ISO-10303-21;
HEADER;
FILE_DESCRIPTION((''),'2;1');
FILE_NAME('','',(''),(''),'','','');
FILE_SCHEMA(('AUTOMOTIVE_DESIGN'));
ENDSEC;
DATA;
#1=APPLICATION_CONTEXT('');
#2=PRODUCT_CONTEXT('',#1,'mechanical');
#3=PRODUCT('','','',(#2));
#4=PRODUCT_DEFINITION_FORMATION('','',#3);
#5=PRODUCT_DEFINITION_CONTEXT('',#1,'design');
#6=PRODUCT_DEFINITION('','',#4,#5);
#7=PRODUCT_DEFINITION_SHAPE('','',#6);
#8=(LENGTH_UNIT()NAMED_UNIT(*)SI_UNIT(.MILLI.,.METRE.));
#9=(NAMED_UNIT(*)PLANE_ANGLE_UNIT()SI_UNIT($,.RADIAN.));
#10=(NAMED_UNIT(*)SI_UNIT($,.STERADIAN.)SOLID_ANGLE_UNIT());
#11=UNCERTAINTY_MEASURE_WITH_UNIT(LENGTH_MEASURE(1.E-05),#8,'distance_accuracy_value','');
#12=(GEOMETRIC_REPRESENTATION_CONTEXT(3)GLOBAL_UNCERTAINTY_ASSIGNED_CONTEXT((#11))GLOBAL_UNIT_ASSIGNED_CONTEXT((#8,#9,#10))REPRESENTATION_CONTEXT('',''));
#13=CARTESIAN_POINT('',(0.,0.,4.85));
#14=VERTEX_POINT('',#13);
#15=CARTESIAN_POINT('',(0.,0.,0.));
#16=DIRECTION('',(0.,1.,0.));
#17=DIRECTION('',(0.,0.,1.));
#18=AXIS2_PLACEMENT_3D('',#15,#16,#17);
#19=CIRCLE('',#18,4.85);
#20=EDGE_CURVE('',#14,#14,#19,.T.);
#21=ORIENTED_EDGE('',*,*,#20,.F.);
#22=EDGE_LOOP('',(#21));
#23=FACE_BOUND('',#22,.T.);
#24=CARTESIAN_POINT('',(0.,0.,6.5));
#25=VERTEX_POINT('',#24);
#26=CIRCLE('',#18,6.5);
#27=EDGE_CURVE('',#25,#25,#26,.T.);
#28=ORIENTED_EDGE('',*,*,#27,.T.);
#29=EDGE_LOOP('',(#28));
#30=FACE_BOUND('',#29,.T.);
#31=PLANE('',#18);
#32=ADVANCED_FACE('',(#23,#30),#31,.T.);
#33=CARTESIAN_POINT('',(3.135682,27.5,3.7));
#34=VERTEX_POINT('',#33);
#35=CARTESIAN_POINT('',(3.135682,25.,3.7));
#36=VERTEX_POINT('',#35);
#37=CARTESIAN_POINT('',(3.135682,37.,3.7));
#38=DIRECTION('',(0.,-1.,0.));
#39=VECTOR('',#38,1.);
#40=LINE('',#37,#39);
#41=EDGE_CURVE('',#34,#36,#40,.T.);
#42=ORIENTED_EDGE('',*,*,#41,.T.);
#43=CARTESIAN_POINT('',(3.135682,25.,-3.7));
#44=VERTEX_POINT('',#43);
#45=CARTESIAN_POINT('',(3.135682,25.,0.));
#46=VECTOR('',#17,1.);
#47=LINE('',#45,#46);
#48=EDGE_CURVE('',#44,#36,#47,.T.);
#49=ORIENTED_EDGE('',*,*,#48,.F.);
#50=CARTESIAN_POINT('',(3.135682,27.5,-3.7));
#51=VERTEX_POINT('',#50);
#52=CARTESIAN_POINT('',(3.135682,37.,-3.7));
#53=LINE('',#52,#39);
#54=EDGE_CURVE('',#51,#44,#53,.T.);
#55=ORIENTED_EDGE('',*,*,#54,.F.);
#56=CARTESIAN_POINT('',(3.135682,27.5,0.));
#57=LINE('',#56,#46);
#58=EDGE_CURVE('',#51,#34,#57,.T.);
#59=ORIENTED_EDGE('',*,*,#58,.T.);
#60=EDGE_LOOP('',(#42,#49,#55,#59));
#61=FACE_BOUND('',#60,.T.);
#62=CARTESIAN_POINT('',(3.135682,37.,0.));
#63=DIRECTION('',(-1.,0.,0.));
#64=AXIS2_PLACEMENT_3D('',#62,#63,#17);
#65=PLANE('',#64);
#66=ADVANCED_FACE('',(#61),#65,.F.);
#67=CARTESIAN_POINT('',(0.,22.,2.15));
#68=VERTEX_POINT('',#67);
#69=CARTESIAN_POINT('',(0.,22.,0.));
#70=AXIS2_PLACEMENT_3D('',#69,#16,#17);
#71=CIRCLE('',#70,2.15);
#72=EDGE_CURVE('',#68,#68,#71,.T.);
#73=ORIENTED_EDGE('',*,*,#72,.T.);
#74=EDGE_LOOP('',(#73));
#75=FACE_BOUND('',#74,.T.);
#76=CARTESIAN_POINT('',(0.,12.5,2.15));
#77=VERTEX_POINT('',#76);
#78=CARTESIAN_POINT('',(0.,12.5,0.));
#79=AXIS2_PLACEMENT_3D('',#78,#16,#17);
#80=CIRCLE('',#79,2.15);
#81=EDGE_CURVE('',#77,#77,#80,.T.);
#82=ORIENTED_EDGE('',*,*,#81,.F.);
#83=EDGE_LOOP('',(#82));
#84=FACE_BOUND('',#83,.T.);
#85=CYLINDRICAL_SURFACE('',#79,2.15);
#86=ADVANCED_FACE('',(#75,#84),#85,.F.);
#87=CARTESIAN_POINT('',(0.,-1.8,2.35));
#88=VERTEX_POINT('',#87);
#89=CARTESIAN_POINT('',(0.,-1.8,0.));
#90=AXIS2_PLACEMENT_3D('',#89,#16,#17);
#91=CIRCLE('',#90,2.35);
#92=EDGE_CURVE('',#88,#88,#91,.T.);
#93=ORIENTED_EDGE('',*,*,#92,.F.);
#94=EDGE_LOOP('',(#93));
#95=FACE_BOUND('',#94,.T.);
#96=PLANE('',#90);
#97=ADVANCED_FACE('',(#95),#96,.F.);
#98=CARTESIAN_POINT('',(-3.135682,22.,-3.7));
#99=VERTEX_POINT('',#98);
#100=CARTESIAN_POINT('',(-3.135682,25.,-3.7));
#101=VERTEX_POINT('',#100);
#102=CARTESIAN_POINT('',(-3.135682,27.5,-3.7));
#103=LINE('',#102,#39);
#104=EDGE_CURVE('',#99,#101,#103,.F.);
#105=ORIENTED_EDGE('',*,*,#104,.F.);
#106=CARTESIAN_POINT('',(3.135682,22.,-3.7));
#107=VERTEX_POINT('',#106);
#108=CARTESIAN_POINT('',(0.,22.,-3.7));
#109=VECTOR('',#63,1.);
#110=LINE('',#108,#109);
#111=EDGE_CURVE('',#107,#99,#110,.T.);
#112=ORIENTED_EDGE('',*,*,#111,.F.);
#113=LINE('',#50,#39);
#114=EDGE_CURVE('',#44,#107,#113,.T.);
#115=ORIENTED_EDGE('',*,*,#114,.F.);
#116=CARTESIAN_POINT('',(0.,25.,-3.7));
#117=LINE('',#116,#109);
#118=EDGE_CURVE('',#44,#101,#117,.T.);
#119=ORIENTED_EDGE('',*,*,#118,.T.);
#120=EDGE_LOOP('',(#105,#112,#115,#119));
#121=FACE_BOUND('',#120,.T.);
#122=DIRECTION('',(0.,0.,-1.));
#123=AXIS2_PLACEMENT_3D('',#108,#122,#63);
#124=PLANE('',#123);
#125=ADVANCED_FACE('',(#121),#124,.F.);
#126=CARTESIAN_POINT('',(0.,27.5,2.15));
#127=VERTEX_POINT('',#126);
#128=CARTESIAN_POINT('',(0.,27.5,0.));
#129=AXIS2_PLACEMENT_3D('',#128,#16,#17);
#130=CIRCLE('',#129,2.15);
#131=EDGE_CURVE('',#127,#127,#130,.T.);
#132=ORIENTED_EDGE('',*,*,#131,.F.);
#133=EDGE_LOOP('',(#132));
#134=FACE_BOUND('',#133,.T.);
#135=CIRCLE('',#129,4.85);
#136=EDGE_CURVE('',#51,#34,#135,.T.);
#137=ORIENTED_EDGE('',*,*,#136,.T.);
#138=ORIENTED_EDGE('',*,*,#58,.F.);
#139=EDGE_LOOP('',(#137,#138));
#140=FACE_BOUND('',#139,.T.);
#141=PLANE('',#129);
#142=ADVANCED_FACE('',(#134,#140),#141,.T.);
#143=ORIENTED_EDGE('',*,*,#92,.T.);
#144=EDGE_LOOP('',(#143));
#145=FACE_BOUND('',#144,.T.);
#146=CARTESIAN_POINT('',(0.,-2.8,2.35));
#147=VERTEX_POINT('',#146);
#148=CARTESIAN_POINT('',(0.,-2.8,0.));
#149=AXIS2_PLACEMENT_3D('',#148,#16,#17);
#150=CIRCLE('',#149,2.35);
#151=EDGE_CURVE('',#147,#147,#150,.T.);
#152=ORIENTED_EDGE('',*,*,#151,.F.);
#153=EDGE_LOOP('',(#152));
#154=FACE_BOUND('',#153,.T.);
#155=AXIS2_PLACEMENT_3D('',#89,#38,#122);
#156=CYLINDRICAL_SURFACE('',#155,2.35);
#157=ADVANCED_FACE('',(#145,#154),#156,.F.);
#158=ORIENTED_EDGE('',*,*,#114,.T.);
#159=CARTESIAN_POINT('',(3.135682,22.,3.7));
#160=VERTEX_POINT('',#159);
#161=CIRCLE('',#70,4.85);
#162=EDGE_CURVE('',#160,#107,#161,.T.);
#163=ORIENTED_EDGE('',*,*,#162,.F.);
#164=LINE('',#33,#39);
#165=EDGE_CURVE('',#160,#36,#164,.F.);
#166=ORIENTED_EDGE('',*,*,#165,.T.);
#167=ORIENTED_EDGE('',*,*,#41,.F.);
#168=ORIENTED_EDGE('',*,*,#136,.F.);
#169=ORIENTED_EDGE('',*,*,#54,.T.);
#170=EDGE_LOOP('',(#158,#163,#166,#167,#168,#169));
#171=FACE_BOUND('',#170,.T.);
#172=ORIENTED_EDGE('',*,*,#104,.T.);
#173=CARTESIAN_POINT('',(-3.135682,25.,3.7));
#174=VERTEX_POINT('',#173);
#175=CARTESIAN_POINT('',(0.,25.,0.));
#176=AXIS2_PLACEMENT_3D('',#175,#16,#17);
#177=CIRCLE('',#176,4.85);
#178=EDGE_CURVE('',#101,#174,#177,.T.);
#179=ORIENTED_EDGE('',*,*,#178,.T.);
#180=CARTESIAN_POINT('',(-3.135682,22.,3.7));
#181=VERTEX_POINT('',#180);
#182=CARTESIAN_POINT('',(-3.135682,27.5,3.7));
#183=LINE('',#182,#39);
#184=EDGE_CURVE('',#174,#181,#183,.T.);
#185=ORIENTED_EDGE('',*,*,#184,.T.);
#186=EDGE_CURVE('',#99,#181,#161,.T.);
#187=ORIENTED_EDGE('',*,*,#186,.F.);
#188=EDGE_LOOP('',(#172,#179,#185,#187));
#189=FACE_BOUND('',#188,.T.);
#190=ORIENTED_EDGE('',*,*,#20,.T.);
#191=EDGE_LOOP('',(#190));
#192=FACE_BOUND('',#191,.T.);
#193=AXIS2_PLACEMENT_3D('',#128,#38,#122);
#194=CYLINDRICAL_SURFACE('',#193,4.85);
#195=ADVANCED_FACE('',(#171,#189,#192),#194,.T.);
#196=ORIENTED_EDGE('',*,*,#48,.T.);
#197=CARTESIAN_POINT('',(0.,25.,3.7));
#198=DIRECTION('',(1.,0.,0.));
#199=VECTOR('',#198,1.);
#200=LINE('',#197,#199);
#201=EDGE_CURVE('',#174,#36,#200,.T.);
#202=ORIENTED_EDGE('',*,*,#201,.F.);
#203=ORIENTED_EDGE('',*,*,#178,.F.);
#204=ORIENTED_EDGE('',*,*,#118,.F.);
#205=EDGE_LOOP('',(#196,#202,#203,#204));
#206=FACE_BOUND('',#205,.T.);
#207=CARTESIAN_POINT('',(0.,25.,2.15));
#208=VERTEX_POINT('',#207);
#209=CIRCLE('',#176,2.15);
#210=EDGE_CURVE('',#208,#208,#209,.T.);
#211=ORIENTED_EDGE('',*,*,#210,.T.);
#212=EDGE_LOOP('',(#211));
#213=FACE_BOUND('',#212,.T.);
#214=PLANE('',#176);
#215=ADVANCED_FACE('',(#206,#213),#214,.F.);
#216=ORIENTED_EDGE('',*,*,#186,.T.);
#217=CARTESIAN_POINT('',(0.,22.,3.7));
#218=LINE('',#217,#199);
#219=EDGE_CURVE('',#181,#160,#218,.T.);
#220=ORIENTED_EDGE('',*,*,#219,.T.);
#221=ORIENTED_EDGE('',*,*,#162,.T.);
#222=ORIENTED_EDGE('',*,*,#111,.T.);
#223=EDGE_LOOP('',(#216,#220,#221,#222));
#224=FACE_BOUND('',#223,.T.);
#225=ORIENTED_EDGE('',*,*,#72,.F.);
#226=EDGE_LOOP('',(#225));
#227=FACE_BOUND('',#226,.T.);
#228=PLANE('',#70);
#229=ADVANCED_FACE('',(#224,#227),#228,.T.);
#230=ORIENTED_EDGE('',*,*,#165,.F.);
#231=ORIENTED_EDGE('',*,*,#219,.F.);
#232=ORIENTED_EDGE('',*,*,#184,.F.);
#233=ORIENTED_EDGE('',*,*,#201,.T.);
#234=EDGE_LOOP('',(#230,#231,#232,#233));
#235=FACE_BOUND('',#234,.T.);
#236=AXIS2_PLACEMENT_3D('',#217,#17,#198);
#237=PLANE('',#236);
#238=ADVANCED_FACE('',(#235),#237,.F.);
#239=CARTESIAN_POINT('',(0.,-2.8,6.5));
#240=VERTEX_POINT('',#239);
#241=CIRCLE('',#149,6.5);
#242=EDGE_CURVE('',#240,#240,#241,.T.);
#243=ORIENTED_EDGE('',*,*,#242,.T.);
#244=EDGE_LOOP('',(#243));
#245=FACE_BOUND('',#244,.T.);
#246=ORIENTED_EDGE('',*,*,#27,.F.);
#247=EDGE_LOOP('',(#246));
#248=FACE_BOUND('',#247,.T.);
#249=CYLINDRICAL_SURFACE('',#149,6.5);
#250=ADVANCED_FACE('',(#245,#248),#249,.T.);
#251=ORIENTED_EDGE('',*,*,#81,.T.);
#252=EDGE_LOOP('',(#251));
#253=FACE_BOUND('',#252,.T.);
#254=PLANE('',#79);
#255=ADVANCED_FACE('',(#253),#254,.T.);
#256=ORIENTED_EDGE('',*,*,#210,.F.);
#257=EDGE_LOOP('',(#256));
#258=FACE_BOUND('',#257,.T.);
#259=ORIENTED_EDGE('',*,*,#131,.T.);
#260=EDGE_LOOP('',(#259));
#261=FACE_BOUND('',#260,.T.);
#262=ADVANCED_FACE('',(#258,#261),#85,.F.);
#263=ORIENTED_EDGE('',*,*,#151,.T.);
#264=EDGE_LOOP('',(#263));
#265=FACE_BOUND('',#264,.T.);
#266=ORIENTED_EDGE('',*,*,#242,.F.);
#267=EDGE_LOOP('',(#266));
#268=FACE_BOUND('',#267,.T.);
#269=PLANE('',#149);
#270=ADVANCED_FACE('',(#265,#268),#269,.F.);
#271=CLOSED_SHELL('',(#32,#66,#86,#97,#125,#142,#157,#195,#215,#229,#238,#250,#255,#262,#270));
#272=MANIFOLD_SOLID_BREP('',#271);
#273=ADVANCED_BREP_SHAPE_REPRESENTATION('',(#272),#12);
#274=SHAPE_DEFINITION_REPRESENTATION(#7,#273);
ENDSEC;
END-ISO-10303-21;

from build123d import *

# Parameters (mm, degrees)
SKETCH1_R              = 4.85
SKETCH1_R_2            = 3
SKETCH1_R_3            = 2.15
BOSS_EXTRUDE1_DEPTH    = 27.5
BOSS_EXTRUDE2_START    = -2.8
SKETCH1_3_R            = 6.5
SKETCH1_3_R_2          = 4.85
SKETCH1_3_R_3          = 3
SKETCH1_3_R_4          = 2.15
BOSS_EXTRUDE2_DEPTH    = 2.8
CUT_EXTRUDE1_START     = 22
CUT_EXTRUDE1_OUTLINE_R = 2.15
CUT_EXTRUDE1_DEPTH     = 3
CUT_EXTRUDE2_START     = 12.5
SKETCH2_3_R            = 2.15
CUT_EXTRUDE2_DEPTH     = 15
CUT_EXTRUDE3_START     = 22
CUT_EXTRUDE3_DEPTH     = 15
CUT_EXTRUDE4_START     = -2.8
SKETCH3_R              = 2.35
CUT_EXTRUDE4_DEPTH     = 1


# Read off the part's stored shape, not the designer's step: Cut-Extrude1
with BuildPart() as part:
    # Sketch1 → Boss-Extrude1 (new body)
    # profile 1 of 3: a face of its own
    with BuildSketch(Plane(origin=(0, 0, 0), x_dir=(1, 0, 0), z_dir=(0, 1, 0))):
        with Locations(Location((0, 0, 0), (0, 0, 270))):
            Circle(SKETCH1_R)
        Circle(SKETCH1_R_2, mode=Mode.SUBTRACT)
    # profile 2 of 3: a face of its own
    with BuildSketch(Plane(origin=(0, 0, 0), x_dir=(1, 0, 0), z_dir=(0, 1, 0))):
        Circle(SKETCH1_R_2)
        Circle(SKETCH1_R_3, mode=Mode.SUBTRACT)
    # profile 3 of 3: a face of its own
    with BuildSketch(Plane(origin=(0, 0, 0), x_dir=(1, 0, 0), z_dir=(0, 1, 0))):
        Circle(SKETCH1_R_3)
    extrude(amount=BOSS_EXTRUDE1_DEPTH)

    # Sketch1<3> → Boss-Extrude2 (add)
    # profile 1 of 4: a face of its own
    with BuildSketch(Plane(origin=(0, 0, 0), x_dir=(1, 0, 0), z_dir=(0, 1, 0)).offset(BOSS_EXTRUDE2_START)):
        with Locations(Location((0, 0, 0), (0, 0, 270))):
            Circle(SKETCH1_3_R)
        with Locations(Location((0, 0, 0), (0, 0, 270))):
            Circle(SKETCH1_3_R_2, mode=Mode.SUBTRACT)
    # profile 2 of 4: a face of its own
    with BuildSketch(Plane(origin=(0, 0, 0), x_dir=(1, 0, 0), z_dir=(0, 1, 0)).offset(BOSS_EXTRUDE2_START)):
        with Locations(Location((0, 0, 0), (0, 0, 270))):
            Circle(SKETCH1_3_R_2)
        Circle(SKETCH1_3_R_3, mode=Mode.SUBTRACT)
    # profile 3 of 4: a face of its own
    with BuildSketch(Plane(origin=(0, 0, 0), x_dir=(1, 0, 0), z_dir=(0, 1, 0)).offset(BOSS_EXTRUDE2_START)):
        Circle(SKETCH1_3_R_3)
        Circle(SKETCH1_3_R_4, mode=Mode.SUBTRACT)
    # profile 4 of 4: a face of its own
    with BuildSketch(Plane(origin=(0, 0, 0), x_dir=(1, 0, 0), z_dir=(0, 1, 0)).offset(BOSS_EXTRUDE2_START)):
        Circle(SKETCH1_3_R_4)
    extrude(amount=BOSS_EXTRUDE2_DEPTH)

    # Cut-Extrude1 outline → Cut-Extrude1 (cut)
    with BuildSketch(Plane(origin=(0, 0, 0), x_dir=(1, 0, 0), z_dir=(0, 1, 0)).offset(CUT_EXTRUDE1_START)):
        with BuildLine():
            ThreePointArc((-3.135681744, 3.7), (-4.85, 0), (-3.135681744, -3.7))
            Line((-3.135681744, -3.7), (3.135681744, -3.7))
            ThreePointArc((3.135681744, -3.7), (4.85, 0), (3.135681744, 3.7))
            Line((3.135681744, 3.7), (-3.135681744, 3.7))
        make_face()
        Circle(CUT_EXTRUDE1_OUTLINE_R, mode=Mode.SUBTRACT)
    extrude(amount=CUT_EXTRUDE1_DEPTH, mode=Mode.SUBTRACT)

    # Sketch2<3> → Cut-Extrude2 (cut)
    with BuildSketch(Plane(origin=(0, 0, 0), x_dir=(1, 0, 0), z_dir=(0, 1, 0)).offset(CUT_EXTRUDE2_START)):
        with Locations(Location((0, 0, 0), (0, 0, 270))):
            Circle(SKETCH2_3_R)
    extrude(amount=CUT_EXTRUDE2_DEPTH, mode=Mode.SUBTRACT)

    # Sketch2<4> → Cut-Extrude3 (cut)
    with BuildSketch(Plane(origin=(0, 0, 0), x_dir=(1, 0, 0), z_dir=(0, 1, 0)).offset(CUT_EXTRUDE3_START)):
        Polygon((4.272391992, 0), (3.135681744, 1.968839903), (3.135681744, -1.968839903), align=None)
        with BuildLine():
            ThreePointArc((4.85, 0), (4.400599758, 2.038926622), (3.135681744, 3.7))
            Line((3.135681744, 3.7), (3.135681744, 1.968839903))
            Line((3.135681744, 1.968839903), (4.272391992, 0))
            Line((4.272391992, 0), (3.135681744, -1.968839903))
            Line((3.135681744, -1.968839903), (3.135681744, -3.7))
            ThreePointArc((3.135681744, -3.7), (4.400599758, -2.038926622), (4.85, 0))
        make_face()
    extrude(amount=CUT_EXTRUDE3_DEPTH, mode=Mode.SUBTRACT)

    # Sketch3 → Cut-Extrude4 (cut)
    with BuildSketch(Plane(origin=(0, 0, 0), x_dir=(1, 0, 0), z_dir=(0, 1, 0)).offset(CUT_EXTRUDE4_START)):
        with Locations(Location((0, 0, 0), (0, 0, 270))):
            Circle(SKETCH3_R)
    extrude(amount=CUT_EXTRUDE4_DEPTH, mode=Mode.SUBTRACT)


solid = part.part
